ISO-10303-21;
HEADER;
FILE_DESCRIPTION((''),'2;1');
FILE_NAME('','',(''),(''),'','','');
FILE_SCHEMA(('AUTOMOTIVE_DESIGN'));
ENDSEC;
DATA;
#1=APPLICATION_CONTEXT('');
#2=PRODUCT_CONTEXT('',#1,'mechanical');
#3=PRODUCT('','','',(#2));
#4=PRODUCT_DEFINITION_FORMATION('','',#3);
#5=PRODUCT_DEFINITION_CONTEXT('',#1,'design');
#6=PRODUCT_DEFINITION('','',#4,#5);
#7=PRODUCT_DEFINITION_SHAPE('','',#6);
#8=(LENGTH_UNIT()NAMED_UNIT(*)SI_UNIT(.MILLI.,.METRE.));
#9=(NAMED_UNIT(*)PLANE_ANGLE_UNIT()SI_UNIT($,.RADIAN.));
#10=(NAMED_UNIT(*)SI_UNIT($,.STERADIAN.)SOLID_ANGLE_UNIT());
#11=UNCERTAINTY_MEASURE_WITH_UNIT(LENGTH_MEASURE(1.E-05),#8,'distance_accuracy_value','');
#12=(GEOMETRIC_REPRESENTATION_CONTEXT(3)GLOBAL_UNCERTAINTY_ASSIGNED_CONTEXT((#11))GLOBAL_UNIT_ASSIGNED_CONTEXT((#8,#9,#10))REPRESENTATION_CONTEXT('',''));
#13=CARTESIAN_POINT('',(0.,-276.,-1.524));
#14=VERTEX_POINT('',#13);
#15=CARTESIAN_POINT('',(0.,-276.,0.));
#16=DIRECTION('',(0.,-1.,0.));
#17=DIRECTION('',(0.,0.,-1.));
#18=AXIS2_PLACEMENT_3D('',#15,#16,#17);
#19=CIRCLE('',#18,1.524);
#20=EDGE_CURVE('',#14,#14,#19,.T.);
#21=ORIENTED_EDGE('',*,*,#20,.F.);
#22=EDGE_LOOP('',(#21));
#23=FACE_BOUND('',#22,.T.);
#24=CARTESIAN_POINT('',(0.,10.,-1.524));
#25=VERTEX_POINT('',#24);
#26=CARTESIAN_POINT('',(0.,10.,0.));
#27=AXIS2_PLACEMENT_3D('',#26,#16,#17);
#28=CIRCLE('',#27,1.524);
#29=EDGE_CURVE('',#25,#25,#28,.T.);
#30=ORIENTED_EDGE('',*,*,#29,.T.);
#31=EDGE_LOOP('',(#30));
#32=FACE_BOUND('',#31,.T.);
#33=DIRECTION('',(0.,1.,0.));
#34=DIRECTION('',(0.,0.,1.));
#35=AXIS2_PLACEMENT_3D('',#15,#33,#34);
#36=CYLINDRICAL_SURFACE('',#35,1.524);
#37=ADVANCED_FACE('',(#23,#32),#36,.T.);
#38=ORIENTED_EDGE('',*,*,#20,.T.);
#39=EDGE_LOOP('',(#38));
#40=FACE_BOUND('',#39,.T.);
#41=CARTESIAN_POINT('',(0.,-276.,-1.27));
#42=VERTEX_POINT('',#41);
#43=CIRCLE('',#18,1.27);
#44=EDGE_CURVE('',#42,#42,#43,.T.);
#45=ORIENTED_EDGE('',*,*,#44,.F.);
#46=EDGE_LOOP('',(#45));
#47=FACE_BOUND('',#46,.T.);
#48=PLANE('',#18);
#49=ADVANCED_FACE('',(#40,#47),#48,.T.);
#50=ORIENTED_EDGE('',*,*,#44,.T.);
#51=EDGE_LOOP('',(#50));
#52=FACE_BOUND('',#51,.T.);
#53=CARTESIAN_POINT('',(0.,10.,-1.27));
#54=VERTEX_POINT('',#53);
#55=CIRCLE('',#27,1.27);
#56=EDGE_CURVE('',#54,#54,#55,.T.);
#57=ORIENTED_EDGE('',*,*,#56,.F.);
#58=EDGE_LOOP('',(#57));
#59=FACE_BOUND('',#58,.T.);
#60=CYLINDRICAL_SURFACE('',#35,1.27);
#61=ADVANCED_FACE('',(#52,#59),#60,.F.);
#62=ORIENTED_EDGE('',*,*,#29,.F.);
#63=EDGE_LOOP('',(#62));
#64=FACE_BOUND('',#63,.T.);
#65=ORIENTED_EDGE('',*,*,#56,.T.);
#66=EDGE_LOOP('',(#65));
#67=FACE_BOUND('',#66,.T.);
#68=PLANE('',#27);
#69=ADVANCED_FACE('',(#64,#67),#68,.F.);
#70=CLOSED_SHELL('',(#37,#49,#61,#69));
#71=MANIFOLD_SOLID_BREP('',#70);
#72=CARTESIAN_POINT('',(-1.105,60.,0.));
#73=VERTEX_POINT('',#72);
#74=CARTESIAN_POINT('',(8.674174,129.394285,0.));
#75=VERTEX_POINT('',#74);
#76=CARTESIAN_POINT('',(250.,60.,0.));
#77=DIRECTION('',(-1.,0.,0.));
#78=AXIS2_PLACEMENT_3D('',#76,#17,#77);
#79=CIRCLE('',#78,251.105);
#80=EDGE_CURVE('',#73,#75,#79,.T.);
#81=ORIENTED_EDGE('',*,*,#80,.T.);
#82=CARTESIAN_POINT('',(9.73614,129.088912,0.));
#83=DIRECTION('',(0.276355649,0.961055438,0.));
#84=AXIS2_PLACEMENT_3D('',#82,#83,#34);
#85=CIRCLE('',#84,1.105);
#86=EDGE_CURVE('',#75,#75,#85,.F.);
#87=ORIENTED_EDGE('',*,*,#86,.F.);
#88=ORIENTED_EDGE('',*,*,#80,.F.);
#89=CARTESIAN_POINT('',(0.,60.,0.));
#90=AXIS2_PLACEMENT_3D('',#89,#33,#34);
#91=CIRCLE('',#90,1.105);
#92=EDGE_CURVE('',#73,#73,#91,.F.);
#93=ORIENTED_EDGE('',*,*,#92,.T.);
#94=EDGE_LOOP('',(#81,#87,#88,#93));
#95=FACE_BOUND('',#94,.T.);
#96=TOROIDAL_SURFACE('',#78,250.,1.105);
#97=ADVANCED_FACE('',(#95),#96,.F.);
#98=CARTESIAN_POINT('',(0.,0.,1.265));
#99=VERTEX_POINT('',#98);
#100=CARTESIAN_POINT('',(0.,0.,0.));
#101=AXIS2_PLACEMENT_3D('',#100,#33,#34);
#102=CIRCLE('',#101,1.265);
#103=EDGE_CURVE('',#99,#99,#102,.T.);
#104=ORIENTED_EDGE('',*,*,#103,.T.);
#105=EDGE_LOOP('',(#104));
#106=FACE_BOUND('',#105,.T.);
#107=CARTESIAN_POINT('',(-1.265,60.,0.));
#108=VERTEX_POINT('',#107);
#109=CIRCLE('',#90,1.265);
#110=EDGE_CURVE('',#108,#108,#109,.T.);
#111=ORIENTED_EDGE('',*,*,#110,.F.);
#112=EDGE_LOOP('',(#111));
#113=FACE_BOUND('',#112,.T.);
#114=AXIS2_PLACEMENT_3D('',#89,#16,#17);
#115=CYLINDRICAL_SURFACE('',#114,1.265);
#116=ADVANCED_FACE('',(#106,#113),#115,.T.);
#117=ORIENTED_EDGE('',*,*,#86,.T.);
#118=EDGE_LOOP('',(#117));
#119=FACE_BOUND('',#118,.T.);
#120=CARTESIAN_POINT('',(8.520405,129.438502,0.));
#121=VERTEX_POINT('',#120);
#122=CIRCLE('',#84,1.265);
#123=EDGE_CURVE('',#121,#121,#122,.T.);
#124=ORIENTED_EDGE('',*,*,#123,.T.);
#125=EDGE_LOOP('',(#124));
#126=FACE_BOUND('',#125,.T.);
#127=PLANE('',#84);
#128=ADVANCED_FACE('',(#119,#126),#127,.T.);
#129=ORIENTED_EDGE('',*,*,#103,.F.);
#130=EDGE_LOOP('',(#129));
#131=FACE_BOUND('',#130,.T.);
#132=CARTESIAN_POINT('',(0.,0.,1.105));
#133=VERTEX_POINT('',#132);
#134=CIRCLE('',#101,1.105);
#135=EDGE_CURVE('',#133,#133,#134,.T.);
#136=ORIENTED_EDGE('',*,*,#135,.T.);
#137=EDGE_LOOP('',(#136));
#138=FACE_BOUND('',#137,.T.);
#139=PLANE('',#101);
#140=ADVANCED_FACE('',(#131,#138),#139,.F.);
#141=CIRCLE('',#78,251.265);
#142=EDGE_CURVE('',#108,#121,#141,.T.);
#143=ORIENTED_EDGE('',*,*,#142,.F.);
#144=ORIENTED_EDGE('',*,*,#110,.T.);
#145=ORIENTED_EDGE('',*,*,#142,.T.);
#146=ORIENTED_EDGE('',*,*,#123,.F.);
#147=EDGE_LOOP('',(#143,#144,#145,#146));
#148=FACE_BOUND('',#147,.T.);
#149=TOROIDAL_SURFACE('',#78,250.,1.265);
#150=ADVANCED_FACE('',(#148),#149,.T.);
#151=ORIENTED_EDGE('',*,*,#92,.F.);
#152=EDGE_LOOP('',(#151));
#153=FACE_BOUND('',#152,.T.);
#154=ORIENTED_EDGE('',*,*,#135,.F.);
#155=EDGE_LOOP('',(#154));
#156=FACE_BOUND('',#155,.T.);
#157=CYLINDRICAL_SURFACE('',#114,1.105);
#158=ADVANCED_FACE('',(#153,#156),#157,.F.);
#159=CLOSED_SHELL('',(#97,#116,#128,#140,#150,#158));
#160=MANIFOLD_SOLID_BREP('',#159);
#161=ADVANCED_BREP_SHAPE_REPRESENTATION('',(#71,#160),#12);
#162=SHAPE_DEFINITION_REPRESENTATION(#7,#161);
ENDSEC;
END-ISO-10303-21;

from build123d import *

# Parameters (mm, degrees)
SKETCH1_R           = 1.265
SKETCH1_R_2         = 1.105
BOSS_EXTRUDE1_DEPTH = 60
SWEEP2_OUTLINE_R    = 1.265
SWEEP2_OUTLINE_R_2  = 1.105
SWEEP2_ANGLE        = 16.042818
SKETCH4_R           = 1.524
SKETCH4_R_2         = 1.27
BOSS_EXTRUDE2_DEPTH = 286


# Read off the part's stored shape, not the designer's step: Sweep2
with BuildPart() as part:
    # Sketch1 → Boss-Extrude1 (new body)
    with BuildSketch(Plane(origin=(0, 0, 0), x_dir=(1, 0, 0), z_dir=(0, 1, 0))):
        with Locations(Location((0, 0, 0), (0, 0, 270))):
            Circle(SKETCH1_R)
        with Locations(Location((0, 0, 0), (0, 0, 270))):
            Circle(SKETCH1_R_2, mode=Mode.SUBTRACT)
    extrude(amount=BOSS_EXTRUDE1_DEPTH)


with BuildPart() as sweep2_tool:
    # Sweep2 outline → Sweep2 (revolve)
    with BuildSketch(Plane(origin=(250, 60, 0), x_dir=(-0.9610554383107709, 0.2763556485641141, 0), z_dir=(0.2763556485641141, 0.9610554383107709, 0))):
        with Locations((250, 0)):
            Circle(SWEEP2_OUTLINE_R)
        with Locations((250, 0)):
            Circle(SWEEP2_OUTLINE_R_2, mode=Mode.SUBTRACT)
    revolve(axis=Axis((250, 60, 0), (0, 0, 1)), revolution_arc=SWEEP2_ANGLE)


with BuildPart() as part_1:
    add(part.part)


with BuildPart() as part_2:
    # Sweep2: joined with sweep2_tool
    add(part_1.part.fuse(sweep2_tool.part, tol=0.00001))


with BuildPart() as body_2:
    # Sketch4 → Boss-Extrude2 (new body)
    with BuildSketch(Plane(origin=(0, 10, 0), x_dir=(-1, 0, 0), z_dir=(0, -1, 0))):
        with Locations(Location((0, 0, 0), (0, 0, 90))):
            Circle(SKETCH4_R)
        with Locations(Location((0, 0, 0), (0, 0, 90))):
            Circle(SKETCH4_R_2, mode=Mode.SUBTRACT)
    extrude(amount=BOSS_EXTRUDE2_DEPTH)


solid = Compound([part_2.part, body_2.part])
